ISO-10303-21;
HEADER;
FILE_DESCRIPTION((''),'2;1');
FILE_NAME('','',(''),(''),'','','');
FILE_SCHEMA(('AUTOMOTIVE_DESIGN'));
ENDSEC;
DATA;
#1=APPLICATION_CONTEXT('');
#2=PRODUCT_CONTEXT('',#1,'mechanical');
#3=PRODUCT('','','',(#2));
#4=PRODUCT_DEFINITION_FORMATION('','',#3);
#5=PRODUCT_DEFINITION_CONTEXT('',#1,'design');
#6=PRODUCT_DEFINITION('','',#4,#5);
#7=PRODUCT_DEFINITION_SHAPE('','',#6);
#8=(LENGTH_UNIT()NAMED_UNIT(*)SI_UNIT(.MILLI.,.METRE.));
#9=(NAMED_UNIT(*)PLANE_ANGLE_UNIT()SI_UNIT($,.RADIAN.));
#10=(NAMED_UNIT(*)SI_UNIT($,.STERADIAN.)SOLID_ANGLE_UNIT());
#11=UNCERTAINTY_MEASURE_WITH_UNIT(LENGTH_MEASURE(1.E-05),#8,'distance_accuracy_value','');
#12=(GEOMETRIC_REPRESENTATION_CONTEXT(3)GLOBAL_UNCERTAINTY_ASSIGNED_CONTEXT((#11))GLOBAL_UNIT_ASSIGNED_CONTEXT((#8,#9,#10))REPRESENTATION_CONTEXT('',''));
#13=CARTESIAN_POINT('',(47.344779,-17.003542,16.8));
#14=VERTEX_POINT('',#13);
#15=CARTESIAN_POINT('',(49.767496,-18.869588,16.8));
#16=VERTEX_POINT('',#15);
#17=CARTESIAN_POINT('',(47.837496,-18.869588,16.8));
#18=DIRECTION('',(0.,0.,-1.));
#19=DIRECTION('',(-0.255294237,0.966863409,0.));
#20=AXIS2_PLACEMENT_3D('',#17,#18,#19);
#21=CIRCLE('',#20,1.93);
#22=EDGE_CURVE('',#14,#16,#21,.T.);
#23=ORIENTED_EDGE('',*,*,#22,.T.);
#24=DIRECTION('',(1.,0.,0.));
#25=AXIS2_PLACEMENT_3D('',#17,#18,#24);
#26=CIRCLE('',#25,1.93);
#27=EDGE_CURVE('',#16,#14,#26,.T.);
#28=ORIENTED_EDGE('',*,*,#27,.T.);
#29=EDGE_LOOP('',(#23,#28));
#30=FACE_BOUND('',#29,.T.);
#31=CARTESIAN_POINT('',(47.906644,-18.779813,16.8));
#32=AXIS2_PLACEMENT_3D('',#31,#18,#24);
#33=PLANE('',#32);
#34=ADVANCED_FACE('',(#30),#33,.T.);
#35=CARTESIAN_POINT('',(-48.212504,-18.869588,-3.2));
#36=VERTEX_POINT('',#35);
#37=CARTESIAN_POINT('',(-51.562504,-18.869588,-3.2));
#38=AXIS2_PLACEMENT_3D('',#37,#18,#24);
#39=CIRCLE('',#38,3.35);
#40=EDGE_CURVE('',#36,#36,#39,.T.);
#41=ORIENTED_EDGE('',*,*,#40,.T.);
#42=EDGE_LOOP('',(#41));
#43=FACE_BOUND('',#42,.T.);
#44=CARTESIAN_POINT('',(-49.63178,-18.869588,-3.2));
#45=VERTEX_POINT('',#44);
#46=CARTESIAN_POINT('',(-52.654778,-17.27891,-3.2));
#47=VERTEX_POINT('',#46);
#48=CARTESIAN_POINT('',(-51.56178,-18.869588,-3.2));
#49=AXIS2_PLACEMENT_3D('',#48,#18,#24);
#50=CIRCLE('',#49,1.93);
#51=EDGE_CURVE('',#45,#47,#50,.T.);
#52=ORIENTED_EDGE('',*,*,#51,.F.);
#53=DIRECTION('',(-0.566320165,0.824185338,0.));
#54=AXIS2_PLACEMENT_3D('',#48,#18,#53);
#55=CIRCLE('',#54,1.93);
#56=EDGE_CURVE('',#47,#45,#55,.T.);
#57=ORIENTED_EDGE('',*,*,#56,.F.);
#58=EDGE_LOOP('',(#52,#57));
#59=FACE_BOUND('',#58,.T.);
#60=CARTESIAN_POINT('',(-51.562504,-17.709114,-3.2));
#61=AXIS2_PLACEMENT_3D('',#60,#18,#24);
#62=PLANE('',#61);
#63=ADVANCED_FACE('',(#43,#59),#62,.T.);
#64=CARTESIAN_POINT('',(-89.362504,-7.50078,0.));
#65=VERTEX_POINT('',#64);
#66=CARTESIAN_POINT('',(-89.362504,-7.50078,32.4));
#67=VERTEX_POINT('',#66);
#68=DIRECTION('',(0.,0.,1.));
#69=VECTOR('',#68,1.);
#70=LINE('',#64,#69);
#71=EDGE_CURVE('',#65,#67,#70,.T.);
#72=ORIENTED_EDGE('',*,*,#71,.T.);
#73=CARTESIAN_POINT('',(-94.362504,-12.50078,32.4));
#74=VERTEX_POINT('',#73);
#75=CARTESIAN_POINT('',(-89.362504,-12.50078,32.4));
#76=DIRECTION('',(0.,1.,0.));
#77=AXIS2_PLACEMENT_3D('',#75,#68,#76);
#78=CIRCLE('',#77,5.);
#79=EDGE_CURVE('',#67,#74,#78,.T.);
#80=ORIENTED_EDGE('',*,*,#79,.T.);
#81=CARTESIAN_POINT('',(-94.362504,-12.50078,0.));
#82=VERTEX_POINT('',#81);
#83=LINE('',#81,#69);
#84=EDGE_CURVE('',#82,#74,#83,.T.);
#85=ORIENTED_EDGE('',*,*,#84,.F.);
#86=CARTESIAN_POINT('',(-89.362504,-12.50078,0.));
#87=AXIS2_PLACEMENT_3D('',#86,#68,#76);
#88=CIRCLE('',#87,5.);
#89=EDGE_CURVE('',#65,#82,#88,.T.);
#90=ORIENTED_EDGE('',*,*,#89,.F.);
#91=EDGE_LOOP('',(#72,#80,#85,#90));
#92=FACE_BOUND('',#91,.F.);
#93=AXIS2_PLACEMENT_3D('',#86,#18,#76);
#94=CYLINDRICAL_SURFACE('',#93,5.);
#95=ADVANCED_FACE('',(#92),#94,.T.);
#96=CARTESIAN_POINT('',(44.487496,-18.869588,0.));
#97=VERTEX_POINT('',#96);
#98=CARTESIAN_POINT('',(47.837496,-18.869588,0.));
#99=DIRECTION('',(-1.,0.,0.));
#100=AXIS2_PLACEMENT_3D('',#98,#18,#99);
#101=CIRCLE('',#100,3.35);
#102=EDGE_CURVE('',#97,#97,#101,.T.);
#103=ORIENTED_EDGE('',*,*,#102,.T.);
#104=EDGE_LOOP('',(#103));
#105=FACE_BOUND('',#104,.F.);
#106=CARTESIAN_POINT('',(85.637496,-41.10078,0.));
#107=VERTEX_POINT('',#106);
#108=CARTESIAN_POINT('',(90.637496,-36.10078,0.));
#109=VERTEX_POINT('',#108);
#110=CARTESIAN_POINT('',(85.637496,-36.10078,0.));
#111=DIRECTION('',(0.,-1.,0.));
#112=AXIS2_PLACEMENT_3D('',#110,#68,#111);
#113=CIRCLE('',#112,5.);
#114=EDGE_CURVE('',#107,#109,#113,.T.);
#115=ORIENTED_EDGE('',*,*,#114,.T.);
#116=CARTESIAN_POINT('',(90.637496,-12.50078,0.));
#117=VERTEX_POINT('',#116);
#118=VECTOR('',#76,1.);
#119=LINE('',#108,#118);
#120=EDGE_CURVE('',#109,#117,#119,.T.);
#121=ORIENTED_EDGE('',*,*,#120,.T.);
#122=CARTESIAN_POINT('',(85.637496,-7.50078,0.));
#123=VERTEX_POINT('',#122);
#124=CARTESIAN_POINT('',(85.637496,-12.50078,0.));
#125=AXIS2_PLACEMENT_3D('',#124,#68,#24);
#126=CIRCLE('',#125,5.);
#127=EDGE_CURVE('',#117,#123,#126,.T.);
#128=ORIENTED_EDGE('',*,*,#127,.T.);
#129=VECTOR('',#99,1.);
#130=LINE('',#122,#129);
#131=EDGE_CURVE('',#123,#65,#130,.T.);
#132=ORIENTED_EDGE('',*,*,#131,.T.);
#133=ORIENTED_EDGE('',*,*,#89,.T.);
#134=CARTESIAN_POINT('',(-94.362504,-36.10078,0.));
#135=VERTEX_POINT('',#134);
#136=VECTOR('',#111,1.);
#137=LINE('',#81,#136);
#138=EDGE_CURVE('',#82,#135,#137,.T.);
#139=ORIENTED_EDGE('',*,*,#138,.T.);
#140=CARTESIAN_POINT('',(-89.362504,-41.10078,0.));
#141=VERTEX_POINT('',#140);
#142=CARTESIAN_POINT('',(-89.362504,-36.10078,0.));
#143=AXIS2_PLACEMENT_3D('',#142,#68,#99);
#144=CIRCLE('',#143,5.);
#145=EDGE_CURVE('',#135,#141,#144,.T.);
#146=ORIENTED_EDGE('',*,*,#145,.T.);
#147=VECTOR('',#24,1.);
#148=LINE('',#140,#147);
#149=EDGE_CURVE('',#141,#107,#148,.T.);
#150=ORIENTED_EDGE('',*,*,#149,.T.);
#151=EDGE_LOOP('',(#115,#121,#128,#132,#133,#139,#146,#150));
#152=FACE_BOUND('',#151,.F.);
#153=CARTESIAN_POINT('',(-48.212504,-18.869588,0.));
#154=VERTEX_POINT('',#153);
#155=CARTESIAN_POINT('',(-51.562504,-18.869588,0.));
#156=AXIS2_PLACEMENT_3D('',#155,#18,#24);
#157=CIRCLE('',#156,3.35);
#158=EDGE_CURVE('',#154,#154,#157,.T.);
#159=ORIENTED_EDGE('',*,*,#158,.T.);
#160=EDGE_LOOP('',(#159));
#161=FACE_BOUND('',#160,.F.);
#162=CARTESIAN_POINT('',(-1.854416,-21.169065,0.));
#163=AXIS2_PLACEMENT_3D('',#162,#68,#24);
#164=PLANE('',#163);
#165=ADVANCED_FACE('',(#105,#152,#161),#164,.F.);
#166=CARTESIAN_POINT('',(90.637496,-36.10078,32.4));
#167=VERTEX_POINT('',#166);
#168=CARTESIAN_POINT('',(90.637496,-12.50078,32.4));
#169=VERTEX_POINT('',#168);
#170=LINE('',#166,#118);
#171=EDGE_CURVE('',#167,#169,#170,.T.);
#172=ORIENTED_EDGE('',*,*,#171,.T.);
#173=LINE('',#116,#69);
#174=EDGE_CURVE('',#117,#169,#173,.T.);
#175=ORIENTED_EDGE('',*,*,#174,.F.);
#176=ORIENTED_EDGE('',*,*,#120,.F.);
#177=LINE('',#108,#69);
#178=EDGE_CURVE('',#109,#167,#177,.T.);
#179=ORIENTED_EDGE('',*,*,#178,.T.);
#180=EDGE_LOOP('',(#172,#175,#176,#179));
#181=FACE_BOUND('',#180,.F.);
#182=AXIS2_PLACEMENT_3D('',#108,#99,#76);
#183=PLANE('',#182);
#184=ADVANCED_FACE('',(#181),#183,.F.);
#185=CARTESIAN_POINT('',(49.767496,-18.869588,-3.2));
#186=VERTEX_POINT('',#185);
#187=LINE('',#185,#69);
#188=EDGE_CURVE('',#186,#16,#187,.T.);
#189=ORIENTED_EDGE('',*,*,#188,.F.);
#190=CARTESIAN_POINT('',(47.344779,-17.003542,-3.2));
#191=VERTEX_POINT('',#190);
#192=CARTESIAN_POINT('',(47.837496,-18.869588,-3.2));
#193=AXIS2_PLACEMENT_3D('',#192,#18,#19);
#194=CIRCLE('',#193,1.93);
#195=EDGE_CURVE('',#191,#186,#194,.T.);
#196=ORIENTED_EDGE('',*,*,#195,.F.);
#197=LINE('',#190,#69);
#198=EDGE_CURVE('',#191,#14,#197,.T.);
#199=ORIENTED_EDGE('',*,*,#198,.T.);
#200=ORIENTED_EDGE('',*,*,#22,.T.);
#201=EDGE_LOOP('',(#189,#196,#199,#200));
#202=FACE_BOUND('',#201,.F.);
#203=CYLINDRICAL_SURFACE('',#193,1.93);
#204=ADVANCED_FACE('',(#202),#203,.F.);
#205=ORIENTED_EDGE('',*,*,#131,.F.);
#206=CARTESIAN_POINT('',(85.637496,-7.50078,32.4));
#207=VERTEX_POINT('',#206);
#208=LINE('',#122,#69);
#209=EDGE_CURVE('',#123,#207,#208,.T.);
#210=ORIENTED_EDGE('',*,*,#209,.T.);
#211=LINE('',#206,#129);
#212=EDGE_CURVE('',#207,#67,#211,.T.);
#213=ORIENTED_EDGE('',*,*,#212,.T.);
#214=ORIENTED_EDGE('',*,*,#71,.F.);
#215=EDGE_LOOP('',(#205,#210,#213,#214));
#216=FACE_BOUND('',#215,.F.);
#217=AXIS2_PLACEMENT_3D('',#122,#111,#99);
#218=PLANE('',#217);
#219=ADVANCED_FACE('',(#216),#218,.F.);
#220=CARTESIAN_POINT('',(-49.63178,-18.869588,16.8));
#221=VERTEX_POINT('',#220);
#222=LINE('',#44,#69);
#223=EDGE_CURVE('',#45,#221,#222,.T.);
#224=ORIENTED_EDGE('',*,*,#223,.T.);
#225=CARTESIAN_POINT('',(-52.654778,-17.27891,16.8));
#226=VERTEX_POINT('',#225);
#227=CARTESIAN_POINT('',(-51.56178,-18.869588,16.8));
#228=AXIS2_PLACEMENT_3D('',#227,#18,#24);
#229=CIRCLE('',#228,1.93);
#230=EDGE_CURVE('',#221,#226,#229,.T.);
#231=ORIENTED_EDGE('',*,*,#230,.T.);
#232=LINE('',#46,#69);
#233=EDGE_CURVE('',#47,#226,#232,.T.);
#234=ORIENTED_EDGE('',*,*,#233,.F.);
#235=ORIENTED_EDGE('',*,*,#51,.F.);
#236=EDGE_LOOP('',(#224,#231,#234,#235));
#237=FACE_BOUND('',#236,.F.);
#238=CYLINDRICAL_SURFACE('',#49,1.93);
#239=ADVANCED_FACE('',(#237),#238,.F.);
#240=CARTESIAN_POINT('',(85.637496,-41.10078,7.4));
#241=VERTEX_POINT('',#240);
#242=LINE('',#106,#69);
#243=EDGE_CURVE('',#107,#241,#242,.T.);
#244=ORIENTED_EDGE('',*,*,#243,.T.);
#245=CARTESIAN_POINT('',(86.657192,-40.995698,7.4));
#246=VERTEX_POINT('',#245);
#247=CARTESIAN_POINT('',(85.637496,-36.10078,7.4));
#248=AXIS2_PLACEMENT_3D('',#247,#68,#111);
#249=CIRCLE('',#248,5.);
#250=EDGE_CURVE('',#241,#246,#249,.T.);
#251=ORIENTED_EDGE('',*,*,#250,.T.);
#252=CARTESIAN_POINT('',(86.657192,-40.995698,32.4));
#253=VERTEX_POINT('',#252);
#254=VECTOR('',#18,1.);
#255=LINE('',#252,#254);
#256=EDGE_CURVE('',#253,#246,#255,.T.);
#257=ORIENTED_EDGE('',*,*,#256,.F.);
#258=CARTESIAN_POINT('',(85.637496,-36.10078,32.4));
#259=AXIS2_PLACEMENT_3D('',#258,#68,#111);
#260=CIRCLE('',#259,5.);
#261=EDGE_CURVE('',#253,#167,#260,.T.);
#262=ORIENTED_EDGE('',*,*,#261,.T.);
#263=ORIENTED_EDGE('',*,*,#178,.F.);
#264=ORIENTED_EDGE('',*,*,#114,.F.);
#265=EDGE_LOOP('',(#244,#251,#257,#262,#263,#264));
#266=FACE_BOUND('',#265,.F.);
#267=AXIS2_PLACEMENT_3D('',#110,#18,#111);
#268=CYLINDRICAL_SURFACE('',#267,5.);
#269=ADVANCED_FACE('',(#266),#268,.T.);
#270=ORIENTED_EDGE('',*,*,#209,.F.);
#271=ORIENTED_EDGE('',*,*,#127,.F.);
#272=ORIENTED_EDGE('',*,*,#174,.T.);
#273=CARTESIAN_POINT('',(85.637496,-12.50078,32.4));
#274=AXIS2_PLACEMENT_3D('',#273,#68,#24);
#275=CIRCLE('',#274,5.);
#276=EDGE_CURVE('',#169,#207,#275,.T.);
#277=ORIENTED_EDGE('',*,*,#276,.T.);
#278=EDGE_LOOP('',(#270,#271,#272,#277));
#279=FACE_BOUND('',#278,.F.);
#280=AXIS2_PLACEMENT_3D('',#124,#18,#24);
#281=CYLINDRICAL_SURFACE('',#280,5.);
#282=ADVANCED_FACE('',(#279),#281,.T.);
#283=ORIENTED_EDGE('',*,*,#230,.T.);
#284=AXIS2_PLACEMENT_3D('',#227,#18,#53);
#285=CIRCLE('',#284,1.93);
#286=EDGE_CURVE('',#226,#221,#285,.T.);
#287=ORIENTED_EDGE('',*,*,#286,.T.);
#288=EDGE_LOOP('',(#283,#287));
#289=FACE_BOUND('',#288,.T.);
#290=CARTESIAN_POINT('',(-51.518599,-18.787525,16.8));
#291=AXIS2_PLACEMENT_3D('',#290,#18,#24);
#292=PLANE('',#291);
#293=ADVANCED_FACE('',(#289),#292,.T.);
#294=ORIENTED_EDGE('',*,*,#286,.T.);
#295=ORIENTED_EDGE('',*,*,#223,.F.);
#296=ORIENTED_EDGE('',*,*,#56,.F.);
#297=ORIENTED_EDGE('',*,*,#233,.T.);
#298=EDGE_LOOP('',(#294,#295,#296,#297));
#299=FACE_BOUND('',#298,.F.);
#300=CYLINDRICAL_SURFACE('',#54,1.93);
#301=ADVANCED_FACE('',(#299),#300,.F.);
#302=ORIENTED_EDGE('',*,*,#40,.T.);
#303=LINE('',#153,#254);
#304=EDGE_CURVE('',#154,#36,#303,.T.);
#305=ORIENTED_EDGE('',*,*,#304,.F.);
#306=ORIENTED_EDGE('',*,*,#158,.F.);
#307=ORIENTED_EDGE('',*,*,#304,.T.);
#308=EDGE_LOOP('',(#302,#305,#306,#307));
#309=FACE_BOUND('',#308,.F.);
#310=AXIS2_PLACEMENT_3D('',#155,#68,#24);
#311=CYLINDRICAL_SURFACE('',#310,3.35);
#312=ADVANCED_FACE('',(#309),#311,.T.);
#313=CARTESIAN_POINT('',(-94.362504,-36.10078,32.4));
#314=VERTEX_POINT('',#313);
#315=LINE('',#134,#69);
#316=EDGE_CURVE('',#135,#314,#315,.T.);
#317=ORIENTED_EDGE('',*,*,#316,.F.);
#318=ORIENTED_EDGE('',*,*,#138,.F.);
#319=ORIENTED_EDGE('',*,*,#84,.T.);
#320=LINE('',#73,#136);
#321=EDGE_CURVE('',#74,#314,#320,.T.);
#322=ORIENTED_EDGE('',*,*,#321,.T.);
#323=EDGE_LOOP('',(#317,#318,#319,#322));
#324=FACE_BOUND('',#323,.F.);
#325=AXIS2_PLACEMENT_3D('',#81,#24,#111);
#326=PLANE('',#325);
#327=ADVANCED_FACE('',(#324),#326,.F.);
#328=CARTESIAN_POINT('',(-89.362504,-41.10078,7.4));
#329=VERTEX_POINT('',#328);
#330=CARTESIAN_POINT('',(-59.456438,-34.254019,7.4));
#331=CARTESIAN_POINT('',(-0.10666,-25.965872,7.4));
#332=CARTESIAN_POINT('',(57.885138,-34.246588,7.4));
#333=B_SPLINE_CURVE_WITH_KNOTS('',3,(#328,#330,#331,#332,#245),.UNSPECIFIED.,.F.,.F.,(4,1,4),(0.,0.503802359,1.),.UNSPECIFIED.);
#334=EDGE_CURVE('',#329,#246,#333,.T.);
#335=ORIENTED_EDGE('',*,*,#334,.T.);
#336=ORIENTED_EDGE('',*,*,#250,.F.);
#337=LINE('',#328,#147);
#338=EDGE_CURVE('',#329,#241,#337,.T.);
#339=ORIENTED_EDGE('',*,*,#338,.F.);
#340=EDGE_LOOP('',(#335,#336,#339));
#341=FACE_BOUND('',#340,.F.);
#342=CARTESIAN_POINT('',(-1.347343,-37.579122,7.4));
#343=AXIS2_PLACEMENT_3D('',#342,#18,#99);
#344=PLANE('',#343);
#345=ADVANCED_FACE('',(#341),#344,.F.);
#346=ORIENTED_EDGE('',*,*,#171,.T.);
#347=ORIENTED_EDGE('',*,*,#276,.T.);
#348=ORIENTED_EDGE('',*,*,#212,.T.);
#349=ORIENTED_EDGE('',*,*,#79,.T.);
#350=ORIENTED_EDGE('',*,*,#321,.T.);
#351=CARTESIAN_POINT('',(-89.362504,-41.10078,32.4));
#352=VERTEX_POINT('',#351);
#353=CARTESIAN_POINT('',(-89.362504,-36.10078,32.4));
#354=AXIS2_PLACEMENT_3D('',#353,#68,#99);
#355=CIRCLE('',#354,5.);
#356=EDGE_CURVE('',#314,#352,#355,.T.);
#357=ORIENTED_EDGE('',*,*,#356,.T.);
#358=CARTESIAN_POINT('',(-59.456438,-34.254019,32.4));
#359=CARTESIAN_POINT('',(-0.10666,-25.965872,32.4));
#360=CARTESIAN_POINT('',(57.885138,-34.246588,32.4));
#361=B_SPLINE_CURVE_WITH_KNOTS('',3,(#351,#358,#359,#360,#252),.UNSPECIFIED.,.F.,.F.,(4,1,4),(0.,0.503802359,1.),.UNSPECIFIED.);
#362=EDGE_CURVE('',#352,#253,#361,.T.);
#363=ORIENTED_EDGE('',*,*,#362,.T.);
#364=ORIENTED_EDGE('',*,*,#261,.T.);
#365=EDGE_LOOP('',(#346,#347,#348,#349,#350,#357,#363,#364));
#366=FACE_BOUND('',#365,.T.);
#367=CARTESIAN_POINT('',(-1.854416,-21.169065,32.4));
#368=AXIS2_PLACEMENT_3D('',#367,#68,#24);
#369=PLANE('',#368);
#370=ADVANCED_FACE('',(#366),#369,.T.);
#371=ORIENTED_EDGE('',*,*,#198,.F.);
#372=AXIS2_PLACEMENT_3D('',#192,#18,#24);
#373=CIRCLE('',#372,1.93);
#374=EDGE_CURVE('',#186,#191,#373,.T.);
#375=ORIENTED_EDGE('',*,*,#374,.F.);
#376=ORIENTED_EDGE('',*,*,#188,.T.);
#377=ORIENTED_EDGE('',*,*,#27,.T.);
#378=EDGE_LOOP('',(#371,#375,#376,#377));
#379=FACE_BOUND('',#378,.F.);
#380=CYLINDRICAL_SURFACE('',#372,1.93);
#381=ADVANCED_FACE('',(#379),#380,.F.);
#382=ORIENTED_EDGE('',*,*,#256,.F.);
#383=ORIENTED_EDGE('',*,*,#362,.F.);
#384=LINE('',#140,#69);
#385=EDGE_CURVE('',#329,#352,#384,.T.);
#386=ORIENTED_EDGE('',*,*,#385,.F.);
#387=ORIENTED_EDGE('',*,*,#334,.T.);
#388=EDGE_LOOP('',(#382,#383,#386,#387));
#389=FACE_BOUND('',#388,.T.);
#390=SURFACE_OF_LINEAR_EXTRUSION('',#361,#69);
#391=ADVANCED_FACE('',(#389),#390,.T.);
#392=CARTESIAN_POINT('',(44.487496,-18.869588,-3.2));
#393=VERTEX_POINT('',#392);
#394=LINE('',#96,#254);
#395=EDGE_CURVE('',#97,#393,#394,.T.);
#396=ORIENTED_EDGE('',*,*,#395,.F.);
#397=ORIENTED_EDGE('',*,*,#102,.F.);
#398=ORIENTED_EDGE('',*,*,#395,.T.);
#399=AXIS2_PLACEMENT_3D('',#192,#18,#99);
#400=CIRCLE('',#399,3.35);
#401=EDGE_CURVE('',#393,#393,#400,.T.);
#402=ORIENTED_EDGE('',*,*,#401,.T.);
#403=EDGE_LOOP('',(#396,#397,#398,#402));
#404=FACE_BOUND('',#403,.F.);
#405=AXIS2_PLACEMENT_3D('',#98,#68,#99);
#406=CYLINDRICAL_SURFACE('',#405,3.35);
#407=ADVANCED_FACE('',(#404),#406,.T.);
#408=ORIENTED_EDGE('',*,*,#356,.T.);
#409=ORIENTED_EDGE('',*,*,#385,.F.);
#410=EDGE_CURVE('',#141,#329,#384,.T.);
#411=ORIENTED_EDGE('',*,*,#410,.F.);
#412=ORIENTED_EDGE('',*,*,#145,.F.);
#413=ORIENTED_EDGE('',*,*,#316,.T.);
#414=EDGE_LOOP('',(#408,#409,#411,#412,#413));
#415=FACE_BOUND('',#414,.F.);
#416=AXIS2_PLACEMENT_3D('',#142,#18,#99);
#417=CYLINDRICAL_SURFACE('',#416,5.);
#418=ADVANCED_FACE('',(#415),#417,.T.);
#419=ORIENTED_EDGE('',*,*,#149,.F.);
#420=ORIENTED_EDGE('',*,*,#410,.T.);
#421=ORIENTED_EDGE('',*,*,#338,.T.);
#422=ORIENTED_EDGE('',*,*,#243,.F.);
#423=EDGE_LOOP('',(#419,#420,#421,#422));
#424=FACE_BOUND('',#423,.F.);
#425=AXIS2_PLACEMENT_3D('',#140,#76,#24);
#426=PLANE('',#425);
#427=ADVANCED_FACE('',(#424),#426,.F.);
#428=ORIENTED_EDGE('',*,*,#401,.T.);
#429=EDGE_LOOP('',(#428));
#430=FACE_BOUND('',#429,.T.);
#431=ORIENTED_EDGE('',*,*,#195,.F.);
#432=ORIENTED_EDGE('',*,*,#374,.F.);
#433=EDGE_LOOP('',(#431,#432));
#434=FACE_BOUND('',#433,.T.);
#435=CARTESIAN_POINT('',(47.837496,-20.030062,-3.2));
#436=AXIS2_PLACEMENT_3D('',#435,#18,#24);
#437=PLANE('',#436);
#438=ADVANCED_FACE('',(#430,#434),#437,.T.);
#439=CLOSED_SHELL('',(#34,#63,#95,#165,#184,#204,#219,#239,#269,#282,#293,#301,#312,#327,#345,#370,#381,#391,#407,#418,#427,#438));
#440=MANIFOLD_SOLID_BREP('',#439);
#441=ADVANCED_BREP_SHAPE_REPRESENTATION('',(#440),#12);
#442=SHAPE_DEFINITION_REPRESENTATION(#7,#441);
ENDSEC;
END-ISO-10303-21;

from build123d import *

# Parameters (mm, degrees)
F1_DEPTH = 32.4
F3_DEPTH = 25
F5_DEPTH = 3.2
F7_DEPTH = 20


# Not quite as in the source:
# - a feature names something its author has since deleted; it is built from what else it names


with BuildPart() as f1:
    # F0 (on Top) → F1 (new body)
    with BuildSketch(Plane.XY):
        with BuildLine():
            Line((85.6374964118, -7.5007802074), (-89.3625035882, -7.5007802074))
            ThreePointArc((-89.3625035882, -7.5007802074), (-92.8980374941, -8.9652463014), (-94.3625035882, -12.5007802074))
            Line((-94.3625035882, -12.5007802074), (-94.3625035882, -36.1007802074))
            ThreePointArc((-94.3625035882, -36.1007802074), (-92.8980374941, -39.6363141133), (-89.3625035882, -41.1007802074))
            add(Edge.make_bspline(
                [(-89.3625035882, -41.1007802074), (-59.4132024584, -34.6381396439), (-0.1322912347, -21.8461476087), (57.2468589299, -34.7273087443), (85.6374964118, -41.1007802074)],
                knots=[0, 0, 0, 0, 0.5052098646, 1, 1, 1, 1], degree=3))
            ThreePointArc((85.6374964118, -41.1007802074), (89.1730303177, -39.6363141133), (90.6374964118, -36.1007802074))
            Line((90.6374964118, -36.1007802074), (90.6374964118, -12.5007802074))
            ThreePointArc((90.6374964118, -12.5007802074), (89.1730303177, -8.9652463014), (85.6374964118, -7.5007802074))
        make_face()
        with BuildLine():
            add(Edge.make_bspline(
                [(-89.3625035882, -41.1007802074), (-59.4132024584, -34.6381396439), (-0.1322912347, -21.8461476087), (57.2468589299, -34.7273087443), (85.6374964118, -41.1007802074)],
                knots=[0, 0, 0, 0, 0.5052098646, 1, 1, 1, 1], degree=3))
            Line((-89.3625035882, -41.1007802074), (85.6374964118, -41.1007802074))
        make_face()
    extrude(amount=F1_DEPTH)

    # F2 (on face) → F3 (cut)
    with BuildSketch(Plane.XY.offset(32.4)):
        with BuildLine():
            add(Edge.make_bspline(
                [(-89.3625035882, -41.1007802074), (-59.456438476, -34.254019451), (-0.1066600814, -25.9658719218), (57.8851377231, -34.2465879534), (86.657191818, -40.9956981105)],
                knots=[0, 0, 0, 0, 0.5038023595, 1, 1, 1, 1], degree=3))
            Line((-89.3625035882, -41.1007802074), (85.6374964118, -41.1007802074))
            ThreePointArc((85.6374964118, -41.1007802074), (86.1500442068, -41.0744403041), (86.657191818, -40.9956981105))
        make_face()
    extrude(amount=-F3_DEPTH, mode=Mode.SUBTRACT)

    # F4 (on face) → F5 (join)
    with BuildSketch(Plane(origin=(0, 0, 0), x_dir=(1, 0, 0), z_dir=(0, 0, -1))):
        with BuildLine():
            Line((-51.5625035882, 18.8695881516), (-54.9125035882, 18.8695881516))
            ThreePointArc((-54.9125035882, 18.8695881516), (-51.5625035882, 15.5195881516), (-48.2125035882, 18.8695881516))
            Line((-48.2125035882, 18.8695881516), (-51.5625035882, 18.8695881516))
        make_face()
        with BuildLine():
            ThreePointArc((-48.2125035882, 18.8695881516), (-51.5625035882, 22.2195881516), (-54.9125035882, 18.8695881516))
            Line((-54.9125035882, 18.8695881516), (-51.5625035882, 18.8695881516))
            Line((-51.5625035882, 18.8695881516), (-48.2125035882, 18.8695881516))
        make_face()
        with BuildLine():
            ThreePointArc((51.1874964118, 18.8695881516), (47.8374964118, 22.2195881516), (44.4874964118, 18.8695881516))
            Line((44.4874964118, 18.8695881516), (47.8374964118, 18.8695881516))
            Line((47.8374964118, 18.8695881516), (51.1874964118, 18.8695881516))
        make_face()
        with BuildLine():
            Line((47.8374964118, 18.8695881516), (44.4874964118, 18.8695881516))
            ThreePointArc((44.4874964118, 18.8695881516), (47.8374964118, 15.5195881516), (51.1874964118, 18.8695881516))
            Line((51.1874964118, 18.8695881516), (47.8374964118, 18.8695881516))
        make_face()
    extrude(amount=F5_DEPTH)

    # F6 (on face) → F7 (cut)
    with BuildSketch(Plane(origin=(0, 0, -3.2), x_dir=(1, 0, 0), z_dir=(0, 0, -1))):
        with BuildLine():
            ThreePointArc((49.7674964118, 18.8695881516), (46.6597964296, 20.3986148851), (47.3447785341, 17.0035417714))
            ThreePointArc((47.3447785341, 17.0035417714), (49.015196394, 17.340561418), (49.7674964118, 18.8695881516))
        make_face()
        with BuildLine():
            ThreePointArc((-52.6547781922, 17.2789104499), (-50.6630550607, 17.1616089388), (-49.6317802739, 18.8695881516))
            ThreePointArc((-49.6317802739, 18.8695881516), (-52.4605054871, 20.5775673643), (-52.6547781922, 17.2789104499))
        make_face()
    extrude(amount=-F7_DEPTH, mode=Mode.SUBTRACT)


solid = f1.part
